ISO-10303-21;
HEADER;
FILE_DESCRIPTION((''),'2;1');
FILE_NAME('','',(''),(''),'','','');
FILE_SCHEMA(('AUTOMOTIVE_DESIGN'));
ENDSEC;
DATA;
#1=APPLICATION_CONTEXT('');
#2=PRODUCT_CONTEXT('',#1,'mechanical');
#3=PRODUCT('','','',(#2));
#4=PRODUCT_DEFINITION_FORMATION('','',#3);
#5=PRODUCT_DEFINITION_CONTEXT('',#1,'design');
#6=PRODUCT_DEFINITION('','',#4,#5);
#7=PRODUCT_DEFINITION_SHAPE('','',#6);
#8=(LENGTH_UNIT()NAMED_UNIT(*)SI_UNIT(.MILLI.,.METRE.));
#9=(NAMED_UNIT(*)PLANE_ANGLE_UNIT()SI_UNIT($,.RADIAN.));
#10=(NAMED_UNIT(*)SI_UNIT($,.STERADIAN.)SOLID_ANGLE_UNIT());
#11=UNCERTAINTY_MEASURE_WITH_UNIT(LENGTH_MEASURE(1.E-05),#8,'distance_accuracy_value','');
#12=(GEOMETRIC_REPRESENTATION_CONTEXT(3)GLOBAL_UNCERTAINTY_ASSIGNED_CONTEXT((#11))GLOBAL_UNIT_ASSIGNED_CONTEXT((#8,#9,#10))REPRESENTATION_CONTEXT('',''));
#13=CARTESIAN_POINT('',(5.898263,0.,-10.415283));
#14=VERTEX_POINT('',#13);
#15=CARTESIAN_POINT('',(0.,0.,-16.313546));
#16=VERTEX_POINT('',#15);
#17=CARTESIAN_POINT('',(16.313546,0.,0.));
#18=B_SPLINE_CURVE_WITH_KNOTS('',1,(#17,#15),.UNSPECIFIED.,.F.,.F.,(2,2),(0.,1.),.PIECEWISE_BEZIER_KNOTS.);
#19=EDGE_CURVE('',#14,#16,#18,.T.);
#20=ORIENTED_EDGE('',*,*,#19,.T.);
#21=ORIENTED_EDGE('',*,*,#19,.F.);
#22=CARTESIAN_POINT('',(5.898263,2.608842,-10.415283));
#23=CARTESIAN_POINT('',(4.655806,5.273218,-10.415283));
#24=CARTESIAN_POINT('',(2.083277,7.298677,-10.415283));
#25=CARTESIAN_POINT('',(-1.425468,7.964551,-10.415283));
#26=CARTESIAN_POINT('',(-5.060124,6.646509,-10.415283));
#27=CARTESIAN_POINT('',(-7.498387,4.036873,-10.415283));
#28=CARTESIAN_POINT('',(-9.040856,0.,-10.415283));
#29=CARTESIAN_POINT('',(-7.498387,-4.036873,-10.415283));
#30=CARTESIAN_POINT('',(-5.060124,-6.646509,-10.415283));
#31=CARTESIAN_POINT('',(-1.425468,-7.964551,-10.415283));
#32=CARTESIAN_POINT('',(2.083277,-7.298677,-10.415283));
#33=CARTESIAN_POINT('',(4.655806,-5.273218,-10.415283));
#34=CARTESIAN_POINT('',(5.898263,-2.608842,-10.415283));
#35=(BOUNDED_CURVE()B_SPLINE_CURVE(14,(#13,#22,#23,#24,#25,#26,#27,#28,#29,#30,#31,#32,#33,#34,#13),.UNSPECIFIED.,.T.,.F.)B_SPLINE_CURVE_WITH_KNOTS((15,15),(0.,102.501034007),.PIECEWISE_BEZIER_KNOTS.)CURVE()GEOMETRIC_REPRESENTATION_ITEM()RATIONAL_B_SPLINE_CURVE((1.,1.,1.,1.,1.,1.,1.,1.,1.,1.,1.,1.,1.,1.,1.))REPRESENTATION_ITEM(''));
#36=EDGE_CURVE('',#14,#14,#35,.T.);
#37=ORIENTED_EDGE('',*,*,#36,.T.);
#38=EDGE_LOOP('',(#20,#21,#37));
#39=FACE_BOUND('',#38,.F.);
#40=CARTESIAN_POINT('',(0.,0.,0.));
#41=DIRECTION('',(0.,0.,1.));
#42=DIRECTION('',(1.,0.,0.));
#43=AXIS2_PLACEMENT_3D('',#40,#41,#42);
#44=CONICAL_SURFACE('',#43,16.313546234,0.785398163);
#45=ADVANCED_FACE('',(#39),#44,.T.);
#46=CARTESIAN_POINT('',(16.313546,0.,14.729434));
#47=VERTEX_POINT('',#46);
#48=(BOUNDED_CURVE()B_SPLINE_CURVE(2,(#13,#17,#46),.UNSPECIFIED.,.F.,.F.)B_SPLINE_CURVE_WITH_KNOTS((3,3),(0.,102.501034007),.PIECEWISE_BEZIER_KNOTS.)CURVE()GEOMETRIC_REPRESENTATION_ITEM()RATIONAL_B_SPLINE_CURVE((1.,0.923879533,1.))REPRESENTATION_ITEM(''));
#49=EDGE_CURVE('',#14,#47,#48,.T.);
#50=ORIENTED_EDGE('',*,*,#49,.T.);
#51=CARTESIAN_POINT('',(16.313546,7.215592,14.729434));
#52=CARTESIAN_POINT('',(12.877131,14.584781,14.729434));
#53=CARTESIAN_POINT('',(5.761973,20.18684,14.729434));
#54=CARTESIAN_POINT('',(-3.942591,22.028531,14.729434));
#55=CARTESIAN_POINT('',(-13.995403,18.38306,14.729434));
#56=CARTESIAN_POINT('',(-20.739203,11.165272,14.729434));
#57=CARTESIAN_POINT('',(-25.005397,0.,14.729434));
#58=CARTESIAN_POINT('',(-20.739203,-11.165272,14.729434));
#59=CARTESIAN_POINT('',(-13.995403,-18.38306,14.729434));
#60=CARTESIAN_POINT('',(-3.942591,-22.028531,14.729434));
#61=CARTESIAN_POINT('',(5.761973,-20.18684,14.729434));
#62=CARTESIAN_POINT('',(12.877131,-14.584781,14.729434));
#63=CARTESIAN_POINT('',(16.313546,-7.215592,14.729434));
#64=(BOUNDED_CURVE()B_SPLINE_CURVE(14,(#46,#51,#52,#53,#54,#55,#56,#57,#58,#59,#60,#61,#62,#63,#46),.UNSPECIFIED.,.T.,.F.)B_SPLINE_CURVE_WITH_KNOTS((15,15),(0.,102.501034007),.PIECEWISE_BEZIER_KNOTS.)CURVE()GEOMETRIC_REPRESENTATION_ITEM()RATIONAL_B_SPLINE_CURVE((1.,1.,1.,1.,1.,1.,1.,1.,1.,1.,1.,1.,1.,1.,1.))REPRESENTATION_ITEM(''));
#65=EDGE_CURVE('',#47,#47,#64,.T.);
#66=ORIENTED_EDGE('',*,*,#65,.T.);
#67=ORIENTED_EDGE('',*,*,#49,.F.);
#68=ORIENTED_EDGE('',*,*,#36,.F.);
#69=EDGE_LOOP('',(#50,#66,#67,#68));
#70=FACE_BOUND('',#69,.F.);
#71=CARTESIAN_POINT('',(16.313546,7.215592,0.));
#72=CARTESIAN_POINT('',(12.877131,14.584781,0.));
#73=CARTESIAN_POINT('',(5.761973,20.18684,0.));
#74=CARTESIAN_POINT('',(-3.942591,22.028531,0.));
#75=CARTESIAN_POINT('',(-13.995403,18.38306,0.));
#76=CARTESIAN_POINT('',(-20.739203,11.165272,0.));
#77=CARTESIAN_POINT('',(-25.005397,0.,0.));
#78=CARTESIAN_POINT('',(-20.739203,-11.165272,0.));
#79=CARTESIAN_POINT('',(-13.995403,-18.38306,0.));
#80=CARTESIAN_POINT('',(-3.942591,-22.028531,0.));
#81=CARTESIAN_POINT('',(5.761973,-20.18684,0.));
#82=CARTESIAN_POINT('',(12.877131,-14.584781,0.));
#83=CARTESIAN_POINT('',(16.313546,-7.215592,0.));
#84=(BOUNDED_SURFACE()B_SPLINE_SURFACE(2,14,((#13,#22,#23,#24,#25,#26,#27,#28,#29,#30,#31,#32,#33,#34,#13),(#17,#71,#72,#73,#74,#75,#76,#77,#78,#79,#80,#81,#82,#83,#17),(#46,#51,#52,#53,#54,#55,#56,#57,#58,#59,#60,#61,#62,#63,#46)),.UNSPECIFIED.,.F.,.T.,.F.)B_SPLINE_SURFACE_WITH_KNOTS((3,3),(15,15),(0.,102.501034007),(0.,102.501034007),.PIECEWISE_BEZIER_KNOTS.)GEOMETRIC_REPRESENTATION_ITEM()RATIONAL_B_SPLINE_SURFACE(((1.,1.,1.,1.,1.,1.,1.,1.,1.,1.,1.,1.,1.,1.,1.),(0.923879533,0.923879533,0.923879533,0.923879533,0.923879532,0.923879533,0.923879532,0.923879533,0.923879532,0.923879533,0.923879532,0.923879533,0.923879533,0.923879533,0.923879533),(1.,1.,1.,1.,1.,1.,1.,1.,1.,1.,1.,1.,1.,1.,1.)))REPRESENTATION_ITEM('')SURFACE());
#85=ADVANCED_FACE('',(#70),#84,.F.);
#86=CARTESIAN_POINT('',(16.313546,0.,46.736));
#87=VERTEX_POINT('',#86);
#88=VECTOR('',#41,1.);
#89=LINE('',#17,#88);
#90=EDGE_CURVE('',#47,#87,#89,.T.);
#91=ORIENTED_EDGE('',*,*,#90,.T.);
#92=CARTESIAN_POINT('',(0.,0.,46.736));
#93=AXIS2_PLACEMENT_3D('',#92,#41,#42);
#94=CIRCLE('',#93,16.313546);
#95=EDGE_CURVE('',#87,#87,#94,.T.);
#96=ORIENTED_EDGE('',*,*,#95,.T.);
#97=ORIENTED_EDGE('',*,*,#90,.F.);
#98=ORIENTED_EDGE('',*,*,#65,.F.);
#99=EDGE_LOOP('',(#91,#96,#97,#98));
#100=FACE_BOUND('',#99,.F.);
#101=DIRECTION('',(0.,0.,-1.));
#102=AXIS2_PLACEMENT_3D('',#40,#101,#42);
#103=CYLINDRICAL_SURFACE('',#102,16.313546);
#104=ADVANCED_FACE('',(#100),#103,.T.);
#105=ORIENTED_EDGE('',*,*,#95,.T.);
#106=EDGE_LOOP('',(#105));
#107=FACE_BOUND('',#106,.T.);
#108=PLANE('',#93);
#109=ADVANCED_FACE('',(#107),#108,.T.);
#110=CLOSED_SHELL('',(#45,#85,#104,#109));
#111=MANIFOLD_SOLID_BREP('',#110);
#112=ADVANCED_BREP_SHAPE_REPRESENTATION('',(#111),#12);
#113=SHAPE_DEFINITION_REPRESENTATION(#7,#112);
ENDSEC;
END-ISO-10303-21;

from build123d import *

# Parameters (mm, degrees)
F1_R     = 16.3135462342
F2_DEPTH = 46.736
F4_R     = 35.56


# Not quite as in the source:
# - an extrude whose draft closes it to a point is written as a loft to that point


with BuildPart() as f2:
    # F1 (on face) → F2 (new body)
    with BuildSketch(Plane.XY):
        Circle(F1_R)
    extrude(amount=F2_DEPTH)

    # F1 (on face) → F3 section 0
    with BuildSketch(Plane.XY, mode=Mode.PRIVATE) as f3_s0:
        Circle(F1_R)
    loft([f3_s0.sketch, Vertex(0, 0, -16.3135462342)], ruled=True)

    # F4
    f4_edges = [f2.edges().sort_by_distance(p)[0] for p in [
        (-16.313546, 0, 0),
    ]]
    fillet(f4_edges, radius=F4_R)


solid = f2.part
